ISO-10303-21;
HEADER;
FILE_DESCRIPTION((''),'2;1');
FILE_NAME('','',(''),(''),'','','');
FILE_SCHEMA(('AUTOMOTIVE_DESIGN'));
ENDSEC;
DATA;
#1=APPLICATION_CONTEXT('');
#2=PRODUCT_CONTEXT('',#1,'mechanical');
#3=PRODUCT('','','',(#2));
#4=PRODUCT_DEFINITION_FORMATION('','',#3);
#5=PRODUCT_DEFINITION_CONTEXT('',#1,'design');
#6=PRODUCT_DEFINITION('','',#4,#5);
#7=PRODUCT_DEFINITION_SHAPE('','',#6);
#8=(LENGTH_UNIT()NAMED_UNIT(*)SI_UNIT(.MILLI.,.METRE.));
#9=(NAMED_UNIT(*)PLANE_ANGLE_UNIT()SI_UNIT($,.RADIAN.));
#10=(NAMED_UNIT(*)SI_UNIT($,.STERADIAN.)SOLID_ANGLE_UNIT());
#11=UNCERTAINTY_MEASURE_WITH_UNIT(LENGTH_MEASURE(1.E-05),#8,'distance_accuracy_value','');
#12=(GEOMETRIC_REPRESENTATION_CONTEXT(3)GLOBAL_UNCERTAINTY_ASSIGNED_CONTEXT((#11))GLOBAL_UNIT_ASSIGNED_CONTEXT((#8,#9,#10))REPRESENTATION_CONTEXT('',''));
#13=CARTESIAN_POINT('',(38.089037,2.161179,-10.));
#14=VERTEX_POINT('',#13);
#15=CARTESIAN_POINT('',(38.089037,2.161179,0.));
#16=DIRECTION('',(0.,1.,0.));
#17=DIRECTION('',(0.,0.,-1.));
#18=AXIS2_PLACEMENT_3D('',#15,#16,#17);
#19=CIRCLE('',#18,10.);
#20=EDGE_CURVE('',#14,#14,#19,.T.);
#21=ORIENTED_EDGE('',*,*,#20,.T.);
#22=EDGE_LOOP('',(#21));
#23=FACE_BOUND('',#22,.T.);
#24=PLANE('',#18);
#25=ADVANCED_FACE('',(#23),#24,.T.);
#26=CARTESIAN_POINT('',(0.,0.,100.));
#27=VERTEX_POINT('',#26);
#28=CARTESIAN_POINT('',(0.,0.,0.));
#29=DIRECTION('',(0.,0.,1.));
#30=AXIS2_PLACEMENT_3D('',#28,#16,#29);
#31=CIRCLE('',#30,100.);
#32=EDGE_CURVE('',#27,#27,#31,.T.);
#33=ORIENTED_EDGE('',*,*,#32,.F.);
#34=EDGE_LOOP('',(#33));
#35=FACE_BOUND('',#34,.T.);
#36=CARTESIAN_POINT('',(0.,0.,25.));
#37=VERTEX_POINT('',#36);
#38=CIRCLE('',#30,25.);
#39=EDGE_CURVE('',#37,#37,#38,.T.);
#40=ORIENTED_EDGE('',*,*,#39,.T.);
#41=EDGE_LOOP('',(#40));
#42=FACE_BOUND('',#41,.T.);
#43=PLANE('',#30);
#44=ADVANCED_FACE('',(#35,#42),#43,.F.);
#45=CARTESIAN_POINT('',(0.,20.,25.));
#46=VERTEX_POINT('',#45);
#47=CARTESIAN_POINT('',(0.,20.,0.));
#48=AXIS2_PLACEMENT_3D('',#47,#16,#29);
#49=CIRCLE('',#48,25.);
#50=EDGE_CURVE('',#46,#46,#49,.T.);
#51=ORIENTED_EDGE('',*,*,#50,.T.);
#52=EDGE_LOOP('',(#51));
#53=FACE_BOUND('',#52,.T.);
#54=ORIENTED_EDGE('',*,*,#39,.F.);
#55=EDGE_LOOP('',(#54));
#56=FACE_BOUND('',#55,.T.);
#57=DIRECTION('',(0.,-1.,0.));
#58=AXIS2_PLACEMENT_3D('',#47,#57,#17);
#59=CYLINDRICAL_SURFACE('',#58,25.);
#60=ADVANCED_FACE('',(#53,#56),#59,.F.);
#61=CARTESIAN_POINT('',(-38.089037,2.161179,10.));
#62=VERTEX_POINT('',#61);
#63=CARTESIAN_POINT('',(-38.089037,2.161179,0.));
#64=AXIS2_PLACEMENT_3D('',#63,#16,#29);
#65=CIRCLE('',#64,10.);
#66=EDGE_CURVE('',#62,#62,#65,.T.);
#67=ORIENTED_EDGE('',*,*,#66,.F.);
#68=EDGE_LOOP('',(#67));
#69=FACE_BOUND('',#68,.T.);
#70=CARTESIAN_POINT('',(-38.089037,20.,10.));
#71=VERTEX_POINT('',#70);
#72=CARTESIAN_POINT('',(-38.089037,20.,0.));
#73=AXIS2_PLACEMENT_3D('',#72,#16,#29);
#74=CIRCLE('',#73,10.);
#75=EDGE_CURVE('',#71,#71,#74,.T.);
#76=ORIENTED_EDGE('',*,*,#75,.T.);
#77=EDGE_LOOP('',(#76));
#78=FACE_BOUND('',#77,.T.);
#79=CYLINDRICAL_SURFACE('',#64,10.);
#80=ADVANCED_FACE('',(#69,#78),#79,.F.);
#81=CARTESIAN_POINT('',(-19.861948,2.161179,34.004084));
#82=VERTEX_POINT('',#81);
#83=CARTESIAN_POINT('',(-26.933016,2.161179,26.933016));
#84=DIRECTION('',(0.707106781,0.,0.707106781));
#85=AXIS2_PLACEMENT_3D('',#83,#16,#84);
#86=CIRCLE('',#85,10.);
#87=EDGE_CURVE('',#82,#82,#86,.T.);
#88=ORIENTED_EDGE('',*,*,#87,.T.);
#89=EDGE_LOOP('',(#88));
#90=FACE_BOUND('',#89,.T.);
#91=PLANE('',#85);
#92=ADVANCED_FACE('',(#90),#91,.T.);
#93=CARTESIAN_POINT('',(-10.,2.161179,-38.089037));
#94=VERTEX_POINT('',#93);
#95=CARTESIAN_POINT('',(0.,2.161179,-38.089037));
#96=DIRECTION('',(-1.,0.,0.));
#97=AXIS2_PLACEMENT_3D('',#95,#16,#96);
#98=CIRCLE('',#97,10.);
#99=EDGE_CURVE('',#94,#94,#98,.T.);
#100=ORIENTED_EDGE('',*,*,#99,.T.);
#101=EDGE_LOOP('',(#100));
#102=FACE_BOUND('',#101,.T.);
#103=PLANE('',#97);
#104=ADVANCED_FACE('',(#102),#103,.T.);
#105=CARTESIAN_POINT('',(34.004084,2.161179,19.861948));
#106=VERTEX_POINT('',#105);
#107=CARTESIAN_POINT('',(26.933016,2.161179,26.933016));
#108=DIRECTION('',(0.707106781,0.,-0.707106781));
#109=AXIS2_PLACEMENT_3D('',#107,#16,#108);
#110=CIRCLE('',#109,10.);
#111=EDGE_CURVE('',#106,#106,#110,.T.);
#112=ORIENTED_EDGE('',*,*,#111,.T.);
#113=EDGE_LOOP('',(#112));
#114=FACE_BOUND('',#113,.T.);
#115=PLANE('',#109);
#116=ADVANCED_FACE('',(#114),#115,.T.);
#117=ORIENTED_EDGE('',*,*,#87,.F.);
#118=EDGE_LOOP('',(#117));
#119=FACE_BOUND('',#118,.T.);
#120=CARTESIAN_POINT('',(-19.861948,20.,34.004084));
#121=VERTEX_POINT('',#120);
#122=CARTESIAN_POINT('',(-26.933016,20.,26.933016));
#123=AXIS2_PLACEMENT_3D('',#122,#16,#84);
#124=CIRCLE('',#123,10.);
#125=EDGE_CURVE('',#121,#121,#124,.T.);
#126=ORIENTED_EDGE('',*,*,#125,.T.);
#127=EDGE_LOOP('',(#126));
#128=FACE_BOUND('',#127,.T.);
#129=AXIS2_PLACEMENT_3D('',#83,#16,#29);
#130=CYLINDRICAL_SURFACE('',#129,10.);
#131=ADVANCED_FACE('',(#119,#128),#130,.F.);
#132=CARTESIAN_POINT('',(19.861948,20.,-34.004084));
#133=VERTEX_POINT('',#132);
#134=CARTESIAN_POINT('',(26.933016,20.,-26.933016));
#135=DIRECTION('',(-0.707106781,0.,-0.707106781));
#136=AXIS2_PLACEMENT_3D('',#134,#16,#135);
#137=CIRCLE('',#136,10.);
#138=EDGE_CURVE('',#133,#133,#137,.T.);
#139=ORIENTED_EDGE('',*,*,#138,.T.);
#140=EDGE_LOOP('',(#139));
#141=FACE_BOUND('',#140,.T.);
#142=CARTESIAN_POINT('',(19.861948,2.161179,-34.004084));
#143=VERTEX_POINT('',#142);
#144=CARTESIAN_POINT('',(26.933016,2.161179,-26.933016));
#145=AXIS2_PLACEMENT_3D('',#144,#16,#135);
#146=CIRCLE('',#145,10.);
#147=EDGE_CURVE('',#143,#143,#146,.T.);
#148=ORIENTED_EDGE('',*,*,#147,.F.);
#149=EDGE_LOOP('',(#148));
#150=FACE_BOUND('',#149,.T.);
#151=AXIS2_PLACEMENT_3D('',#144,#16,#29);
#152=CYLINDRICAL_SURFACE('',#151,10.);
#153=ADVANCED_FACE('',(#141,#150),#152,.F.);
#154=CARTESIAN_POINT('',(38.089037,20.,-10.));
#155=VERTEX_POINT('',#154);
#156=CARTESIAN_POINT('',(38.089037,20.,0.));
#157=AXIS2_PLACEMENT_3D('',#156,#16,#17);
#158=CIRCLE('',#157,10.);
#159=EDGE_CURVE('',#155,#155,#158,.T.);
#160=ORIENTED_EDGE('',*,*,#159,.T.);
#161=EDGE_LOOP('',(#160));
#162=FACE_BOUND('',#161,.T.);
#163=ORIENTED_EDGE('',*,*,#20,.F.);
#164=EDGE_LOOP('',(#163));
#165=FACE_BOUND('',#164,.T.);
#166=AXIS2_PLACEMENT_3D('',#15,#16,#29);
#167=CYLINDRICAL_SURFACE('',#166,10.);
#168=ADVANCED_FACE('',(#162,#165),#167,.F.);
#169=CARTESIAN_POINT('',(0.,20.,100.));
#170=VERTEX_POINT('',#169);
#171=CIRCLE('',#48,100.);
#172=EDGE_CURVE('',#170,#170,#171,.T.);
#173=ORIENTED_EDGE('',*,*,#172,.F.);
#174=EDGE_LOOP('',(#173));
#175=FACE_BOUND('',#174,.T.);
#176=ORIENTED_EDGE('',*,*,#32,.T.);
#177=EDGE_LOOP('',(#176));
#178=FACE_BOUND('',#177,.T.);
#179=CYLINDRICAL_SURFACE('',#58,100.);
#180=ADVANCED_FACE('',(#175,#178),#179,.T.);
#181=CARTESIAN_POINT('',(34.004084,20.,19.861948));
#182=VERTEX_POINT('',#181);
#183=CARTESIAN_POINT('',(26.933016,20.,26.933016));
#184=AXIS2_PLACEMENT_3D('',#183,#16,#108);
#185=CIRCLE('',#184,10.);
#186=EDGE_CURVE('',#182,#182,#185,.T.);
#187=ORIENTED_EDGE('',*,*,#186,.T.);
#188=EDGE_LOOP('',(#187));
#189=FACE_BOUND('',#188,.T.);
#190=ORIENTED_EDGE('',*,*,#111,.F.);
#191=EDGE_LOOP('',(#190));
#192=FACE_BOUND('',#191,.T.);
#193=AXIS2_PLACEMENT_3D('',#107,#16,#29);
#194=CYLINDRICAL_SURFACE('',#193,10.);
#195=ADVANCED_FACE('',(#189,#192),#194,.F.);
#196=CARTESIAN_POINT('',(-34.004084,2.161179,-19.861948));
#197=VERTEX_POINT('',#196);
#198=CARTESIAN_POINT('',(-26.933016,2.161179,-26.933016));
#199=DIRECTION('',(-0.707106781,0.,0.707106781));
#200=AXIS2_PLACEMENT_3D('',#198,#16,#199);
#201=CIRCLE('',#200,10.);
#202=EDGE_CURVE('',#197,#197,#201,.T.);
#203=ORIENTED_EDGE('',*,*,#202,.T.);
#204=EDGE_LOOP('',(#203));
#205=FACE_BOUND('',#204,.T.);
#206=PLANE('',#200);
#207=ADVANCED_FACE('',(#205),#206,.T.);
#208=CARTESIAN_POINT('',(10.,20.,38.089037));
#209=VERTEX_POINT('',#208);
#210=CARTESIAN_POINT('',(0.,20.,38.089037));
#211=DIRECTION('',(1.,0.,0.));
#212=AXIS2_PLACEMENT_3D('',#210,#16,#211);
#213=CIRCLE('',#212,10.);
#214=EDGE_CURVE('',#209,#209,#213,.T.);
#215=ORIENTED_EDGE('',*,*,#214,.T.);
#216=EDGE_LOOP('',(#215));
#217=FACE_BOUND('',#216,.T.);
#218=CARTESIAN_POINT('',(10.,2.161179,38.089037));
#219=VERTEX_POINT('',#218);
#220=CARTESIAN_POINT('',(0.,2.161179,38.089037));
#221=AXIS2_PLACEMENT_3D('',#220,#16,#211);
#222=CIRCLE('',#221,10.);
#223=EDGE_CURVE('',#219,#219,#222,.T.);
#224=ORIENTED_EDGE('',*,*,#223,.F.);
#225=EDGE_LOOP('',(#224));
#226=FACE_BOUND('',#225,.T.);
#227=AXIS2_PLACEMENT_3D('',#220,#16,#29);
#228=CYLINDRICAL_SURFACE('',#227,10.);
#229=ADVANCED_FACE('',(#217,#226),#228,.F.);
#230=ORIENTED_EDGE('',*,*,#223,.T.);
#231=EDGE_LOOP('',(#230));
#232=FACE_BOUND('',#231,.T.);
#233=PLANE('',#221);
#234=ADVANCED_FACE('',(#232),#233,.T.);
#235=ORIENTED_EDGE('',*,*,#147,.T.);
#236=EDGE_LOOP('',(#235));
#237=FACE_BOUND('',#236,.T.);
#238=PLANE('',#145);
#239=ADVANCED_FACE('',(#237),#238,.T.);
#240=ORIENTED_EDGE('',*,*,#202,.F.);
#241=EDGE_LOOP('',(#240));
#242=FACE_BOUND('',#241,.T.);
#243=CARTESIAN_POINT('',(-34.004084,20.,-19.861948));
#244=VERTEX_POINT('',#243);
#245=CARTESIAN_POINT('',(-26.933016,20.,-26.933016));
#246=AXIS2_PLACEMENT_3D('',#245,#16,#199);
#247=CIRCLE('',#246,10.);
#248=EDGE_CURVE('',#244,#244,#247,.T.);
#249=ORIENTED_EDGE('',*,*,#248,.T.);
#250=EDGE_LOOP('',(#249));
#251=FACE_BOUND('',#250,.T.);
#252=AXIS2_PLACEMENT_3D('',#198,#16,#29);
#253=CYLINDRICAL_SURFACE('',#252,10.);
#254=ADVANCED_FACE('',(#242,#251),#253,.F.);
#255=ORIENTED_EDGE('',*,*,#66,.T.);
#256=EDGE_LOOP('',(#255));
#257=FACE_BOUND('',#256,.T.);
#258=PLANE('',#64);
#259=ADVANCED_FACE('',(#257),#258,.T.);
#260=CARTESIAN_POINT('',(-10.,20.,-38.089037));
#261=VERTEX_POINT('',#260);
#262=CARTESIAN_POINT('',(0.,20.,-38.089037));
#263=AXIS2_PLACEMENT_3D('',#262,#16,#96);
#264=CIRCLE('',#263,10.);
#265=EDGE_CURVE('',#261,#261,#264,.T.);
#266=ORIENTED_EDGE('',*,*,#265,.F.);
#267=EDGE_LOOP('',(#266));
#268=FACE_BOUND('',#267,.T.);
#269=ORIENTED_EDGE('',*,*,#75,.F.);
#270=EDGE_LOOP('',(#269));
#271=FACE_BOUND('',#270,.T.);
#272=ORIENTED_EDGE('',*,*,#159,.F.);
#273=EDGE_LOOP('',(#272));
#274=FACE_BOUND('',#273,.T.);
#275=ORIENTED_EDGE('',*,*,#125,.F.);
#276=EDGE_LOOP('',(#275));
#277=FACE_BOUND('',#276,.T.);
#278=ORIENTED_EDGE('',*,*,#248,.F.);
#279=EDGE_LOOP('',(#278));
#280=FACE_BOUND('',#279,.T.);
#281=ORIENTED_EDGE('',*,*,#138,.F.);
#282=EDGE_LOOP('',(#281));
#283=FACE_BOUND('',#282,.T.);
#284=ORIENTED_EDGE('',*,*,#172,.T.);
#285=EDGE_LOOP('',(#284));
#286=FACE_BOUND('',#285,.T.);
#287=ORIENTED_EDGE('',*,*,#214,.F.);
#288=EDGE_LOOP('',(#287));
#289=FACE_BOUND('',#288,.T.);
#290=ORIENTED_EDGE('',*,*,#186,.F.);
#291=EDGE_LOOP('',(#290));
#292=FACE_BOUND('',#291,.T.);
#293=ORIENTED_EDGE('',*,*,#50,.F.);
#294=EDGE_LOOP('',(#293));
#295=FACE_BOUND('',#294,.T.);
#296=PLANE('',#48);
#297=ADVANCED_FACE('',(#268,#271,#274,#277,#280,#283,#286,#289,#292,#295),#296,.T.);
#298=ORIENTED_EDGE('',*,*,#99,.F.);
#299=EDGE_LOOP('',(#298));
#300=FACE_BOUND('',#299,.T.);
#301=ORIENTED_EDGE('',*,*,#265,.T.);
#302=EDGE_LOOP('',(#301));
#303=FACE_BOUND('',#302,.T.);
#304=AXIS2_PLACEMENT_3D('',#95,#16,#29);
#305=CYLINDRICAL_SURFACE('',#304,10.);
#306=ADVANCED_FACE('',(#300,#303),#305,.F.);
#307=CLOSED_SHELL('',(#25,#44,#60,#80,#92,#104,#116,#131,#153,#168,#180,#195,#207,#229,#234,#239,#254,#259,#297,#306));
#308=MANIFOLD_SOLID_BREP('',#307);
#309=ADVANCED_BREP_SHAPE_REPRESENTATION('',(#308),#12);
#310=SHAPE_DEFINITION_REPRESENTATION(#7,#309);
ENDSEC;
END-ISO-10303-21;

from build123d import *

# Parameters (mm, degrees)
SKETCH1_R           = 100
BOSS_EXTRUDE1_DEPTH = 20
SKETCH2_R           = 25
CUT_EXTRUDE1_DEPTH  = 143.828568571
SKETCH3_R           = 10
CUT_EXTRUDE2_DEPTH  = 17.838821247
CIRPATTERN1_COUNT   = 8


with BuildPart() as part:
    # Sketch1 → Boss-Extrude1 (new body)
    with BuildSketch(Plane(origin=(0, 0, 0), x_dir=(1, 0, 0), z_dir=(0, 1, 0))):
        Circle(SKETCH1_R)
    extrude(amount=BOSS_EXTRUDE1_DEPTH)

    # Sketch2 → Cut-Extrude1 (cut, through all)
    with BuildSketch(Plane(origin=(0, 0, 0), x_dir=(1, 0, 0), z_dir=(0, 1, 0))):
        Circle(SKETCH2_R)
    extrude(amount=CUT_EXTRUDE1_DEPTH, mode=Mode.SUBTRACT)

    # Sketch3 → Cut-Extrude2 (cut)
    with BuildSketch(Plane(origin=(0, 20, 0), x_dir=(1, 0, 0), z_dir=(0, 1, 0))):
        with Locations((-38.089036615, 0)):
            Circle(SKETCH3_R)
    cut_extrude2 = extrude(amount=-CUT_EXTRUDE2_DEPTH, mode=Mode.SUBTRACT)

    # CirPattern1: Cut-Extrude2 ×8 about axis
    cirpattern1_axis = Axis((0, 0, 0), (0, 1, 0))
    for i in range(1, CIRPATTERN1_COUNT):
        add(cut_extrude2.rotate(cirpattern1_axis, i * 360 / CIRPATTERN1_COUNT), mode=Mode.SUBTRACT)


solid = part.part
